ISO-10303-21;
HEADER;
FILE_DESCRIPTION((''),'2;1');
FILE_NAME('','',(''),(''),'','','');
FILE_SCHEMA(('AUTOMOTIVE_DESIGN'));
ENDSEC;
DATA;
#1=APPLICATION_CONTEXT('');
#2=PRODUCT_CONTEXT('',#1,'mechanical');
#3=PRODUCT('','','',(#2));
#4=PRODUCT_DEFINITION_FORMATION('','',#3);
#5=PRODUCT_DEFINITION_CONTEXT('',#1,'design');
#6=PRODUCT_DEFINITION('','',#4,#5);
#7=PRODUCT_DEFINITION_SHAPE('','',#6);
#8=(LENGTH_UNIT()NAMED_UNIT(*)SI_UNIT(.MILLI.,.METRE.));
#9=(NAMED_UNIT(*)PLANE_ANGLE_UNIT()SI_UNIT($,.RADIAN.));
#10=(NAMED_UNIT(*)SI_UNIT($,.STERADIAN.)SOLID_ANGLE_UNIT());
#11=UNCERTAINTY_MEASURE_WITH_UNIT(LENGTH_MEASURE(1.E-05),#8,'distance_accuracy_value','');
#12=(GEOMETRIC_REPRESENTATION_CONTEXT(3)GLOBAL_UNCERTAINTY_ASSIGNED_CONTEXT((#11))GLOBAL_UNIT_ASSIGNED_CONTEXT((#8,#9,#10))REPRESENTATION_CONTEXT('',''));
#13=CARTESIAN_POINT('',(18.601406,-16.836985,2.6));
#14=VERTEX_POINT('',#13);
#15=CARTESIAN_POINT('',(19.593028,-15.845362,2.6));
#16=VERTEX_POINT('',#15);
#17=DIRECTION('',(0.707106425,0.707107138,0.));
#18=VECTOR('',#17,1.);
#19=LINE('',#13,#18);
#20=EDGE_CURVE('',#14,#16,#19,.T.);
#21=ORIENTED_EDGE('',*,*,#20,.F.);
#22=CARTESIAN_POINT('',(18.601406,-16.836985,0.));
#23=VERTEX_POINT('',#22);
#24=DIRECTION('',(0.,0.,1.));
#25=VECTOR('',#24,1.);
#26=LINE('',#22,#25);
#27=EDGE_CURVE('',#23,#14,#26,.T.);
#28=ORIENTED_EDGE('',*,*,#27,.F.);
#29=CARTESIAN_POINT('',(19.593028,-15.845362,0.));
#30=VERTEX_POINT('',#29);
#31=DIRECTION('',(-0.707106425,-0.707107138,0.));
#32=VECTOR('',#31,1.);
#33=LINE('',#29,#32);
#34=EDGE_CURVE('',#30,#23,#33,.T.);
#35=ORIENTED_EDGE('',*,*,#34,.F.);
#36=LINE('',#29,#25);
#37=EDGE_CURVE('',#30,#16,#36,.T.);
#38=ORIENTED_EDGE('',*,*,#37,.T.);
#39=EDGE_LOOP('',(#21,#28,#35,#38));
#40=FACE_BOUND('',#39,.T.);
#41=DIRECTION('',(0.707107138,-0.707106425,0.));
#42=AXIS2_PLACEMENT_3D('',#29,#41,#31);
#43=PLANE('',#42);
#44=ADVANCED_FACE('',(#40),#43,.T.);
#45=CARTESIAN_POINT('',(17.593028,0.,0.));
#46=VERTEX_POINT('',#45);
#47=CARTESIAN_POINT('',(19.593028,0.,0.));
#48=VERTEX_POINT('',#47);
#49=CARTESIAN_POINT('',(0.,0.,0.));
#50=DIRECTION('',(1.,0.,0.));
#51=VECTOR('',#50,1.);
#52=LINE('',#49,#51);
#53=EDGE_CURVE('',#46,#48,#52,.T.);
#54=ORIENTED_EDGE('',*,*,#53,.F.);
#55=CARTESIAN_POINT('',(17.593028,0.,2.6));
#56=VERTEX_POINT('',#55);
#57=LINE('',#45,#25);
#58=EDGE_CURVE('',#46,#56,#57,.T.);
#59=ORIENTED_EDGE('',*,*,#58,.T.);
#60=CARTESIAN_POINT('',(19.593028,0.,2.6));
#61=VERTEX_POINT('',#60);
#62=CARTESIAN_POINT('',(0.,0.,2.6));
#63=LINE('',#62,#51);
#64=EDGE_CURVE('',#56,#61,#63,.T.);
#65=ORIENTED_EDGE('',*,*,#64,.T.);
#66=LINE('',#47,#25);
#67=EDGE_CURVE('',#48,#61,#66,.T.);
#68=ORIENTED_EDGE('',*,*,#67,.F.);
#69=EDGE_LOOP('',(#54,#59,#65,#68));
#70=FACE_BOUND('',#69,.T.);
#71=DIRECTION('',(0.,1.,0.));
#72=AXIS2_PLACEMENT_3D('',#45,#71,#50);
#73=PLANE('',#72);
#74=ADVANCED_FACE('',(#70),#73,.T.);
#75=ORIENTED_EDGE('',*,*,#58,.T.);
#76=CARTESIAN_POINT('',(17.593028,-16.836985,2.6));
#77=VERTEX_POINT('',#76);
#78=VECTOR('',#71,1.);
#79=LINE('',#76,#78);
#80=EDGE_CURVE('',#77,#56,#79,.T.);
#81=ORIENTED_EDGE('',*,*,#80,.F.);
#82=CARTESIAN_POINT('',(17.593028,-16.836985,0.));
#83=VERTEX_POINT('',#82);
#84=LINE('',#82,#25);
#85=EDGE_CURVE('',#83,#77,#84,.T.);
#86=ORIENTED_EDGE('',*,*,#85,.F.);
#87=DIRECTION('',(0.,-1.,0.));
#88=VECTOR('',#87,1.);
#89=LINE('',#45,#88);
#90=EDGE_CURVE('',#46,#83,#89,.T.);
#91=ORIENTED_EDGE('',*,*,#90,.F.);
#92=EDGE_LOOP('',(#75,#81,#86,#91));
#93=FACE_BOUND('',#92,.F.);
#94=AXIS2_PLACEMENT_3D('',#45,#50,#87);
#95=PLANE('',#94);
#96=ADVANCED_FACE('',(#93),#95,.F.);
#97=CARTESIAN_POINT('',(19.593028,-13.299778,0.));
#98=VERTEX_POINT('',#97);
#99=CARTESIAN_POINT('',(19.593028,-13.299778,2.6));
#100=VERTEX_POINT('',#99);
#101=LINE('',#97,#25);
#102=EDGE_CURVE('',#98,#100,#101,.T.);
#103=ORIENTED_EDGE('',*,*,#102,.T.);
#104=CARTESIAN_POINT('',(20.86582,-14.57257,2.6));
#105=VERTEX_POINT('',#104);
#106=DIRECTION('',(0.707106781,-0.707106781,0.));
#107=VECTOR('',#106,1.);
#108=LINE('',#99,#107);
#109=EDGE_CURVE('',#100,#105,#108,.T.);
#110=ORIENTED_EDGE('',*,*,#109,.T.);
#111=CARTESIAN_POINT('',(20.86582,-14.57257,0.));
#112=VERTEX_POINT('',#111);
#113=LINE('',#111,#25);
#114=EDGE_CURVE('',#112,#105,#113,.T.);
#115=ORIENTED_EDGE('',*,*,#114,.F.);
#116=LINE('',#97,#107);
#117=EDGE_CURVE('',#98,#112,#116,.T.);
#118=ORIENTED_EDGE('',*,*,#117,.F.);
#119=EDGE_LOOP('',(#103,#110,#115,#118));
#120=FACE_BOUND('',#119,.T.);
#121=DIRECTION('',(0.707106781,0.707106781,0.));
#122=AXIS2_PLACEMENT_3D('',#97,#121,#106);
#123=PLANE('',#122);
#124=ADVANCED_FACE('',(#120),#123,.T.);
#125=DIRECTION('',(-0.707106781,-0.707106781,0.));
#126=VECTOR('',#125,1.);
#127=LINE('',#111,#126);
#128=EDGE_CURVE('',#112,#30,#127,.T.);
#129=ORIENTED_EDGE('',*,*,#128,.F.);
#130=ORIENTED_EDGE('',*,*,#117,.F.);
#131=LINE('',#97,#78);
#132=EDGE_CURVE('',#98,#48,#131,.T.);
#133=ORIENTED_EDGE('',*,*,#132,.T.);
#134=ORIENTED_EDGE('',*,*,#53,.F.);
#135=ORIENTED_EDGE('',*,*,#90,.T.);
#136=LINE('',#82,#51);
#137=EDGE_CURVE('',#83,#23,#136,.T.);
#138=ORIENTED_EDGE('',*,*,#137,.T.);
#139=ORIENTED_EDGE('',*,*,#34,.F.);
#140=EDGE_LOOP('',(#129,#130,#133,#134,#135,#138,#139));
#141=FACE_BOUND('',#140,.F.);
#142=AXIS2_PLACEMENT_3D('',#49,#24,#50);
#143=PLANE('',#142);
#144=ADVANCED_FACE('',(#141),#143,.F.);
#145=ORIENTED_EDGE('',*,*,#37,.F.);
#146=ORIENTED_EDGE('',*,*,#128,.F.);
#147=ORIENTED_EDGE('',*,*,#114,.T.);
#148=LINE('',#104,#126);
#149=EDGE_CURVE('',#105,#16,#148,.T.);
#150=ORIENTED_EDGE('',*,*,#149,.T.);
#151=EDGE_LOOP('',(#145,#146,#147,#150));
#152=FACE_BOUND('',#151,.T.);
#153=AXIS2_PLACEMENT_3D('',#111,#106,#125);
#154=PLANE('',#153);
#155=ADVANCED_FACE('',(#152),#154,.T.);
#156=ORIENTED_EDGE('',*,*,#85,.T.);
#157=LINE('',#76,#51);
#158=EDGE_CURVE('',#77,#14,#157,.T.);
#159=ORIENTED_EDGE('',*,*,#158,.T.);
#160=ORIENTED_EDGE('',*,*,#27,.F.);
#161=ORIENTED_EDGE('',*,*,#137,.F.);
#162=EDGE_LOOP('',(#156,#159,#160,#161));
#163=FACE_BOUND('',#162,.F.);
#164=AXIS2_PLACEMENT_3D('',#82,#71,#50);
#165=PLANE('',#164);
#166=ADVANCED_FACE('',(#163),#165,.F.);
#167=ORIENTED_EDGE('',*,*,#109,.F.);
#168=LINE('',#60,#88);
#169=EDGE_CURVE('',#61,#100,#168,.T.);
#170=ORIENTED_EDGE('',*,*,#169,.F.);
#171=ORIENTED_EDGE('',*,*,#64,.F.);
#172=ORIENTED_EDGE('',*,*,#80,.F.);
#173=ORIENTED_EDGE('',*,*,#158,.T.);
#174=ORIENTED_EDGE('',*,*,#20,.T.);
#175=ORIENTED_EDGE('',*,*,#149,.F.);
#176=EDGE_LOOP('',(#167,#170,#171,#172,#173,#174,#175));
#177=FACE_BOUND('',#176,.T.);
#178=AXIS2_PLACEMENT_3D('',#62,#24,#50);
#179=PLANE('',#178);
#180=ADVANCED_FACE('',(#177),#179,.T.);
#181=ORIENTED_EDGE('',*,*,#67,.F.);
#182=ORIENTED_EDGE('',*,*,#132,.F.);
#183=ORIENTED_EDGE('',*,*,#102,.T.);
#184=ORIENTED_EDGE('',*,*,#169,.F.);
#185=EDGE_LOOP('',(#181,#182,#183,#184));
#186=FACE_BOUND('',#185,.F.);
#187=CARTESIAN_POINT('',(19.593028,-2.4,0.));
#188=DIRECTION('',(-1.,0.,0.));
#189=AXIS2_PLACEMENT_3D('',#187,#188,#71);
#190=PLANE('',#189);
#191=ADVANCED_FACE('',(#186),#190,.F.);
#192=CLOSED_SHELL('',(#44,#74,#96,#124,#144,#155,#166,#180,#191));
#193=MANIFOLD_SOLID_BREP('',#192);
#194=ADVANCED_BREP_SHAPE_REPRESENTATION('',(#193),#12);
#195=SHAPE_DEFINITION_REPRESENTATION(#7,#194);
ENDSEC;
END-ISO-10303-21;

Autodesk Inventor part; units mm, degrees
ref_plane "YZ Plane" through (0, 0, 0) normal (1, 0, 0) x (0, 1, 0)
ref_plane "XZ Plane" through (0, 0, 0) normal (0, 1, 0) x (-1, 0, 0)
ref_plane "XY Plane" through (0, 0, 0) normal (0, 0, 1) x (1, 0, 0)
sketch "Sketch1" plane through (0, 0, 0) normal (0, 0, 1) x (1, 0, 0)
  line L0 (2, -10.465368) -> (4.697799, -10.465368) construction
  line L1 (0, 0) -> (50, 0)
  line L2 (50, 0) -> (50, -50)
  line L3 (50, -50) -> (0, -50)
  line L4 (0, -50) -> (0, 0)
  line L5 (2.4, -2.4) -> (47.6, -2.4)
  line L6 (47.6, -2.4) -> (47.6, -47.6)
  line L7 (47.6, -47.6) -> (2.4, -47.6)
  line L8 (2.4, -47.6) -> (2.4, -2.4)
  line L9 (2.4, -2.4) -> (47.6, -47.6) construction
  line L10 (47.6, -2.4) -> (2.4, -47.6) construction
  circle A0 centre (25, -25) radius 19.375
  circle A1 centre (25, -25) radius 14.5
  circle A2 centre (25, -25) radius 4.175
  circle A3 centre (31.679764, -18.320236) radius 2.65
  circle A4 centre (25, -15.553387) radius 2.65
  circle A5 centre (18.320236, -18.320236) radius 2.65
  circle A6 centre (15.553387, -25) radius 2.65
  circle A7 centre (18.320236, -31.679764) radius 2.65
  circle A8 centre (25, -34.446613) radius 2.65
  circle A9 centre (31.679764, -31.679764) radius 2.65
  circle A10 centre (34.446613, -25) radius 2.65
  line L11 (50, -25) -> (-10.932785, -25) construction
  line L12 (33.553597, -16.446403) -> (35.253048, -14.746952)
  line L13 (33.553597, -33.553597) -> (35.253048, -35.253048)
  arc A11 (16.446403, -16.446403) -> (16.447482, -33.554675) centre (24.992317, -25) ccw
  line L14 (16.446403, -16.446403) -> (14.746952, -14.746952)
  line L15 (16.447482, -33.554675) -> (14.746952, -35.253048)
  line L16 (3.4, -3.4) -> (46.6, -3.4)
  line L17 (46.6, -3.4) -> (46.6, -46.6)
  line L18 (46.6, -46.6) -> (3.4, -46.6)
  line L19 (3.4, -46.6) -> (3.4, -3.4)
  line L20 (46.6, -46.6) -> (43.6, -46.6)
  line L21 (43.6, -46.6) -> (43.6, -43.6)
  line L22 (43.6, -43.6) -> (46.6, -43.6)
  line L23 (46.6, -43.6) -> (46.6, -46.6)
  line L24 (43.6, -43.6) -> (38.700194, -43.6)
  line L25 (38.700194, -43.6) -> (38.700194, -38.700194)
  line L26 (38.700194, -38.700194) -> (43.6, -38.700194)
  line L27 (43.6, -38.700194) -> (43.6, -43.6)
  line L28 (43.6, -38.700194) -> (46.6, -38.700194)
  line L29 (46.6, -38.700194) -> (46.6, -35.700194)
  line L30 (46.6, -35.700194) -> (43.6, -35.700194)
  line L31 (43.6, -35.700194) -> (43.6, -38.700194)
  line L32 (46.6, -35.700194) -> (42.820879, -35.700194)
  line L33 (42.820879, -35.700194) -> (42.820879, -32.603085)
  line L34 (42.820879, -32.603085) -> (46.6, -32.603085)
  line L35 (46.6, -32.603085) -> (46.6, -35.700194)
  line L36 (38.700194, -43.6) -> (35.700194, -43.6)
  line L37 (35.700194, -43.6) -> (35.700194, -46.6)
  line L38 (35.700194, -46.6) -> (38.700194, -46.6)
  line L39 (38.700194, -46.6) -> (38.700194, -43.6)
  line L40 (35.700194, -46.6) -> (32.383701, -46.6)
  line L41 (32.383701, -46.6) -> (32.383701, -42.912889)
  line L42 (32.383701, -42.912889) -> (35.700194, -42.912889)
  line L43 (35.700194, -42.912889) -> (35.700194, -46.6)
  line L44 (23.5, -43.2) -> (26.5, -43.2)
  line L45 (26.5, -43.2) -> (26.5, -50)
  line L46 (26.5, -50) -> (23.5, -50)
  line L47 (23.5, -50) -> (23.5, -43.2)
  line L48 (23.5, -43.2) -> (26.5, -50) construction
  line L49 (26.5, -43.2) -> (23.5, -50) construction
  circle A12 centre (7.947368, -7.947368) radius 4.547368
  circle A13 centre (42.052632, -7.947368) radius 4.547368
  line L50 (2.4, -47.6) -> (2.4, -50)
  line L51 (47.6, -47.6) -> (47.6, -50)
  line L52 (22.407108, -14.233364) -> (20.194069, -16.446403)
  line L53 (25, 8.52179) -> (25, -70.2) construction
  line L54 (18.320236, -8.83287) -> (18.320236, -33.554675) construction
  line L55 (18.320236, -14.57257) -> (20.194069, -16.446403)
  line L56 (18.320236, -14.57257) -> (20.533275, -12.359531)
  line L57 (22.407108, -14.233364) -> (20.533275, -12.359531)
  line L58 (18.320236, -14.57257) -> (19.593028, -13.299778)
  line L59 (19.593028, -13.299778) -> (20.86582, -14.57257)
  line L60 (20.86582, -14.57257) -> (19.593028, -15.845362)
  line L61 (31.679764, -14.57257) -> (29.466725, -12.359531)
  line L62 (27.592892, -14.233364) -> (29.466725, -12.359531)
  line L63 (27.592892, -14.233364) -> (29.805931, -16.446403)
  line L64 (31.679764, -14.57257) -> (29.805931, -16.446403)
  line L65 (19.593028, 0) -> (17.593028, 0)
  line L66 (17.593028, 0) -> (17.593028, -16.836985)
  line L67 (17.593028, -16.836985) -> (19.593028, -16.836985)
  line L68 (19.593028, -16.836985) -> (19.593028, 0)
  line L69 (19.593028, -15.845362) -> (18.601406, -16.836985)
  point P0 (25, -46.6)
  point P1 (26.5, -44.316848)
  point P2 (26.5, -46.6)
  point P3 (42.052632, -3.4)
  point P4 (46.6, -7.947368)
  point P5 (3.4, -7.947368)
  point P6 (7.947368, -3.4)
  point P7 (26.5, -47.6)
  point P8 (23.5, -47.6)
  dimension "d12" = 5.3
  dimension "d5" = 50
  dimension "d6" = 50
  dimension "d7" = 45.2
  dimension "d8" = 45.2
  dimension "d9" = 38.75
  dimension "d10" = 29
  dimension "d11" = 8.35
  dimension "d13" = 360
  dimension "d14" = 2.4
  dimension "d15" = 2.4
  dimension "d16" = 1
  dimension "d17" = 1
  dimension "d18" = 1
  dimension "d19" = 3
  dimension "d20" = 3
  dimension "d21" = 3
  dimension "d22" = 3
  dimension "d23" = 3
  dimension "d24" = 3
  dimension "d25" = 3
  dimension "d26" = 1.8
  dimension "d27" = 2
extrude "Extrusion1" add sketch "Sketch1" along normal blind 2.6 contours L1 L68 L5 L66 | L5 L68 L16 L66 | L16 L68 A0 L66 | A0 L68 A1 L66 | A1 L68 L56 L55 L69 A5 L66 | A5 L69 L67 L66 | L68 L55 L56 | L59 L60 L68
properties part number "baseHook"
